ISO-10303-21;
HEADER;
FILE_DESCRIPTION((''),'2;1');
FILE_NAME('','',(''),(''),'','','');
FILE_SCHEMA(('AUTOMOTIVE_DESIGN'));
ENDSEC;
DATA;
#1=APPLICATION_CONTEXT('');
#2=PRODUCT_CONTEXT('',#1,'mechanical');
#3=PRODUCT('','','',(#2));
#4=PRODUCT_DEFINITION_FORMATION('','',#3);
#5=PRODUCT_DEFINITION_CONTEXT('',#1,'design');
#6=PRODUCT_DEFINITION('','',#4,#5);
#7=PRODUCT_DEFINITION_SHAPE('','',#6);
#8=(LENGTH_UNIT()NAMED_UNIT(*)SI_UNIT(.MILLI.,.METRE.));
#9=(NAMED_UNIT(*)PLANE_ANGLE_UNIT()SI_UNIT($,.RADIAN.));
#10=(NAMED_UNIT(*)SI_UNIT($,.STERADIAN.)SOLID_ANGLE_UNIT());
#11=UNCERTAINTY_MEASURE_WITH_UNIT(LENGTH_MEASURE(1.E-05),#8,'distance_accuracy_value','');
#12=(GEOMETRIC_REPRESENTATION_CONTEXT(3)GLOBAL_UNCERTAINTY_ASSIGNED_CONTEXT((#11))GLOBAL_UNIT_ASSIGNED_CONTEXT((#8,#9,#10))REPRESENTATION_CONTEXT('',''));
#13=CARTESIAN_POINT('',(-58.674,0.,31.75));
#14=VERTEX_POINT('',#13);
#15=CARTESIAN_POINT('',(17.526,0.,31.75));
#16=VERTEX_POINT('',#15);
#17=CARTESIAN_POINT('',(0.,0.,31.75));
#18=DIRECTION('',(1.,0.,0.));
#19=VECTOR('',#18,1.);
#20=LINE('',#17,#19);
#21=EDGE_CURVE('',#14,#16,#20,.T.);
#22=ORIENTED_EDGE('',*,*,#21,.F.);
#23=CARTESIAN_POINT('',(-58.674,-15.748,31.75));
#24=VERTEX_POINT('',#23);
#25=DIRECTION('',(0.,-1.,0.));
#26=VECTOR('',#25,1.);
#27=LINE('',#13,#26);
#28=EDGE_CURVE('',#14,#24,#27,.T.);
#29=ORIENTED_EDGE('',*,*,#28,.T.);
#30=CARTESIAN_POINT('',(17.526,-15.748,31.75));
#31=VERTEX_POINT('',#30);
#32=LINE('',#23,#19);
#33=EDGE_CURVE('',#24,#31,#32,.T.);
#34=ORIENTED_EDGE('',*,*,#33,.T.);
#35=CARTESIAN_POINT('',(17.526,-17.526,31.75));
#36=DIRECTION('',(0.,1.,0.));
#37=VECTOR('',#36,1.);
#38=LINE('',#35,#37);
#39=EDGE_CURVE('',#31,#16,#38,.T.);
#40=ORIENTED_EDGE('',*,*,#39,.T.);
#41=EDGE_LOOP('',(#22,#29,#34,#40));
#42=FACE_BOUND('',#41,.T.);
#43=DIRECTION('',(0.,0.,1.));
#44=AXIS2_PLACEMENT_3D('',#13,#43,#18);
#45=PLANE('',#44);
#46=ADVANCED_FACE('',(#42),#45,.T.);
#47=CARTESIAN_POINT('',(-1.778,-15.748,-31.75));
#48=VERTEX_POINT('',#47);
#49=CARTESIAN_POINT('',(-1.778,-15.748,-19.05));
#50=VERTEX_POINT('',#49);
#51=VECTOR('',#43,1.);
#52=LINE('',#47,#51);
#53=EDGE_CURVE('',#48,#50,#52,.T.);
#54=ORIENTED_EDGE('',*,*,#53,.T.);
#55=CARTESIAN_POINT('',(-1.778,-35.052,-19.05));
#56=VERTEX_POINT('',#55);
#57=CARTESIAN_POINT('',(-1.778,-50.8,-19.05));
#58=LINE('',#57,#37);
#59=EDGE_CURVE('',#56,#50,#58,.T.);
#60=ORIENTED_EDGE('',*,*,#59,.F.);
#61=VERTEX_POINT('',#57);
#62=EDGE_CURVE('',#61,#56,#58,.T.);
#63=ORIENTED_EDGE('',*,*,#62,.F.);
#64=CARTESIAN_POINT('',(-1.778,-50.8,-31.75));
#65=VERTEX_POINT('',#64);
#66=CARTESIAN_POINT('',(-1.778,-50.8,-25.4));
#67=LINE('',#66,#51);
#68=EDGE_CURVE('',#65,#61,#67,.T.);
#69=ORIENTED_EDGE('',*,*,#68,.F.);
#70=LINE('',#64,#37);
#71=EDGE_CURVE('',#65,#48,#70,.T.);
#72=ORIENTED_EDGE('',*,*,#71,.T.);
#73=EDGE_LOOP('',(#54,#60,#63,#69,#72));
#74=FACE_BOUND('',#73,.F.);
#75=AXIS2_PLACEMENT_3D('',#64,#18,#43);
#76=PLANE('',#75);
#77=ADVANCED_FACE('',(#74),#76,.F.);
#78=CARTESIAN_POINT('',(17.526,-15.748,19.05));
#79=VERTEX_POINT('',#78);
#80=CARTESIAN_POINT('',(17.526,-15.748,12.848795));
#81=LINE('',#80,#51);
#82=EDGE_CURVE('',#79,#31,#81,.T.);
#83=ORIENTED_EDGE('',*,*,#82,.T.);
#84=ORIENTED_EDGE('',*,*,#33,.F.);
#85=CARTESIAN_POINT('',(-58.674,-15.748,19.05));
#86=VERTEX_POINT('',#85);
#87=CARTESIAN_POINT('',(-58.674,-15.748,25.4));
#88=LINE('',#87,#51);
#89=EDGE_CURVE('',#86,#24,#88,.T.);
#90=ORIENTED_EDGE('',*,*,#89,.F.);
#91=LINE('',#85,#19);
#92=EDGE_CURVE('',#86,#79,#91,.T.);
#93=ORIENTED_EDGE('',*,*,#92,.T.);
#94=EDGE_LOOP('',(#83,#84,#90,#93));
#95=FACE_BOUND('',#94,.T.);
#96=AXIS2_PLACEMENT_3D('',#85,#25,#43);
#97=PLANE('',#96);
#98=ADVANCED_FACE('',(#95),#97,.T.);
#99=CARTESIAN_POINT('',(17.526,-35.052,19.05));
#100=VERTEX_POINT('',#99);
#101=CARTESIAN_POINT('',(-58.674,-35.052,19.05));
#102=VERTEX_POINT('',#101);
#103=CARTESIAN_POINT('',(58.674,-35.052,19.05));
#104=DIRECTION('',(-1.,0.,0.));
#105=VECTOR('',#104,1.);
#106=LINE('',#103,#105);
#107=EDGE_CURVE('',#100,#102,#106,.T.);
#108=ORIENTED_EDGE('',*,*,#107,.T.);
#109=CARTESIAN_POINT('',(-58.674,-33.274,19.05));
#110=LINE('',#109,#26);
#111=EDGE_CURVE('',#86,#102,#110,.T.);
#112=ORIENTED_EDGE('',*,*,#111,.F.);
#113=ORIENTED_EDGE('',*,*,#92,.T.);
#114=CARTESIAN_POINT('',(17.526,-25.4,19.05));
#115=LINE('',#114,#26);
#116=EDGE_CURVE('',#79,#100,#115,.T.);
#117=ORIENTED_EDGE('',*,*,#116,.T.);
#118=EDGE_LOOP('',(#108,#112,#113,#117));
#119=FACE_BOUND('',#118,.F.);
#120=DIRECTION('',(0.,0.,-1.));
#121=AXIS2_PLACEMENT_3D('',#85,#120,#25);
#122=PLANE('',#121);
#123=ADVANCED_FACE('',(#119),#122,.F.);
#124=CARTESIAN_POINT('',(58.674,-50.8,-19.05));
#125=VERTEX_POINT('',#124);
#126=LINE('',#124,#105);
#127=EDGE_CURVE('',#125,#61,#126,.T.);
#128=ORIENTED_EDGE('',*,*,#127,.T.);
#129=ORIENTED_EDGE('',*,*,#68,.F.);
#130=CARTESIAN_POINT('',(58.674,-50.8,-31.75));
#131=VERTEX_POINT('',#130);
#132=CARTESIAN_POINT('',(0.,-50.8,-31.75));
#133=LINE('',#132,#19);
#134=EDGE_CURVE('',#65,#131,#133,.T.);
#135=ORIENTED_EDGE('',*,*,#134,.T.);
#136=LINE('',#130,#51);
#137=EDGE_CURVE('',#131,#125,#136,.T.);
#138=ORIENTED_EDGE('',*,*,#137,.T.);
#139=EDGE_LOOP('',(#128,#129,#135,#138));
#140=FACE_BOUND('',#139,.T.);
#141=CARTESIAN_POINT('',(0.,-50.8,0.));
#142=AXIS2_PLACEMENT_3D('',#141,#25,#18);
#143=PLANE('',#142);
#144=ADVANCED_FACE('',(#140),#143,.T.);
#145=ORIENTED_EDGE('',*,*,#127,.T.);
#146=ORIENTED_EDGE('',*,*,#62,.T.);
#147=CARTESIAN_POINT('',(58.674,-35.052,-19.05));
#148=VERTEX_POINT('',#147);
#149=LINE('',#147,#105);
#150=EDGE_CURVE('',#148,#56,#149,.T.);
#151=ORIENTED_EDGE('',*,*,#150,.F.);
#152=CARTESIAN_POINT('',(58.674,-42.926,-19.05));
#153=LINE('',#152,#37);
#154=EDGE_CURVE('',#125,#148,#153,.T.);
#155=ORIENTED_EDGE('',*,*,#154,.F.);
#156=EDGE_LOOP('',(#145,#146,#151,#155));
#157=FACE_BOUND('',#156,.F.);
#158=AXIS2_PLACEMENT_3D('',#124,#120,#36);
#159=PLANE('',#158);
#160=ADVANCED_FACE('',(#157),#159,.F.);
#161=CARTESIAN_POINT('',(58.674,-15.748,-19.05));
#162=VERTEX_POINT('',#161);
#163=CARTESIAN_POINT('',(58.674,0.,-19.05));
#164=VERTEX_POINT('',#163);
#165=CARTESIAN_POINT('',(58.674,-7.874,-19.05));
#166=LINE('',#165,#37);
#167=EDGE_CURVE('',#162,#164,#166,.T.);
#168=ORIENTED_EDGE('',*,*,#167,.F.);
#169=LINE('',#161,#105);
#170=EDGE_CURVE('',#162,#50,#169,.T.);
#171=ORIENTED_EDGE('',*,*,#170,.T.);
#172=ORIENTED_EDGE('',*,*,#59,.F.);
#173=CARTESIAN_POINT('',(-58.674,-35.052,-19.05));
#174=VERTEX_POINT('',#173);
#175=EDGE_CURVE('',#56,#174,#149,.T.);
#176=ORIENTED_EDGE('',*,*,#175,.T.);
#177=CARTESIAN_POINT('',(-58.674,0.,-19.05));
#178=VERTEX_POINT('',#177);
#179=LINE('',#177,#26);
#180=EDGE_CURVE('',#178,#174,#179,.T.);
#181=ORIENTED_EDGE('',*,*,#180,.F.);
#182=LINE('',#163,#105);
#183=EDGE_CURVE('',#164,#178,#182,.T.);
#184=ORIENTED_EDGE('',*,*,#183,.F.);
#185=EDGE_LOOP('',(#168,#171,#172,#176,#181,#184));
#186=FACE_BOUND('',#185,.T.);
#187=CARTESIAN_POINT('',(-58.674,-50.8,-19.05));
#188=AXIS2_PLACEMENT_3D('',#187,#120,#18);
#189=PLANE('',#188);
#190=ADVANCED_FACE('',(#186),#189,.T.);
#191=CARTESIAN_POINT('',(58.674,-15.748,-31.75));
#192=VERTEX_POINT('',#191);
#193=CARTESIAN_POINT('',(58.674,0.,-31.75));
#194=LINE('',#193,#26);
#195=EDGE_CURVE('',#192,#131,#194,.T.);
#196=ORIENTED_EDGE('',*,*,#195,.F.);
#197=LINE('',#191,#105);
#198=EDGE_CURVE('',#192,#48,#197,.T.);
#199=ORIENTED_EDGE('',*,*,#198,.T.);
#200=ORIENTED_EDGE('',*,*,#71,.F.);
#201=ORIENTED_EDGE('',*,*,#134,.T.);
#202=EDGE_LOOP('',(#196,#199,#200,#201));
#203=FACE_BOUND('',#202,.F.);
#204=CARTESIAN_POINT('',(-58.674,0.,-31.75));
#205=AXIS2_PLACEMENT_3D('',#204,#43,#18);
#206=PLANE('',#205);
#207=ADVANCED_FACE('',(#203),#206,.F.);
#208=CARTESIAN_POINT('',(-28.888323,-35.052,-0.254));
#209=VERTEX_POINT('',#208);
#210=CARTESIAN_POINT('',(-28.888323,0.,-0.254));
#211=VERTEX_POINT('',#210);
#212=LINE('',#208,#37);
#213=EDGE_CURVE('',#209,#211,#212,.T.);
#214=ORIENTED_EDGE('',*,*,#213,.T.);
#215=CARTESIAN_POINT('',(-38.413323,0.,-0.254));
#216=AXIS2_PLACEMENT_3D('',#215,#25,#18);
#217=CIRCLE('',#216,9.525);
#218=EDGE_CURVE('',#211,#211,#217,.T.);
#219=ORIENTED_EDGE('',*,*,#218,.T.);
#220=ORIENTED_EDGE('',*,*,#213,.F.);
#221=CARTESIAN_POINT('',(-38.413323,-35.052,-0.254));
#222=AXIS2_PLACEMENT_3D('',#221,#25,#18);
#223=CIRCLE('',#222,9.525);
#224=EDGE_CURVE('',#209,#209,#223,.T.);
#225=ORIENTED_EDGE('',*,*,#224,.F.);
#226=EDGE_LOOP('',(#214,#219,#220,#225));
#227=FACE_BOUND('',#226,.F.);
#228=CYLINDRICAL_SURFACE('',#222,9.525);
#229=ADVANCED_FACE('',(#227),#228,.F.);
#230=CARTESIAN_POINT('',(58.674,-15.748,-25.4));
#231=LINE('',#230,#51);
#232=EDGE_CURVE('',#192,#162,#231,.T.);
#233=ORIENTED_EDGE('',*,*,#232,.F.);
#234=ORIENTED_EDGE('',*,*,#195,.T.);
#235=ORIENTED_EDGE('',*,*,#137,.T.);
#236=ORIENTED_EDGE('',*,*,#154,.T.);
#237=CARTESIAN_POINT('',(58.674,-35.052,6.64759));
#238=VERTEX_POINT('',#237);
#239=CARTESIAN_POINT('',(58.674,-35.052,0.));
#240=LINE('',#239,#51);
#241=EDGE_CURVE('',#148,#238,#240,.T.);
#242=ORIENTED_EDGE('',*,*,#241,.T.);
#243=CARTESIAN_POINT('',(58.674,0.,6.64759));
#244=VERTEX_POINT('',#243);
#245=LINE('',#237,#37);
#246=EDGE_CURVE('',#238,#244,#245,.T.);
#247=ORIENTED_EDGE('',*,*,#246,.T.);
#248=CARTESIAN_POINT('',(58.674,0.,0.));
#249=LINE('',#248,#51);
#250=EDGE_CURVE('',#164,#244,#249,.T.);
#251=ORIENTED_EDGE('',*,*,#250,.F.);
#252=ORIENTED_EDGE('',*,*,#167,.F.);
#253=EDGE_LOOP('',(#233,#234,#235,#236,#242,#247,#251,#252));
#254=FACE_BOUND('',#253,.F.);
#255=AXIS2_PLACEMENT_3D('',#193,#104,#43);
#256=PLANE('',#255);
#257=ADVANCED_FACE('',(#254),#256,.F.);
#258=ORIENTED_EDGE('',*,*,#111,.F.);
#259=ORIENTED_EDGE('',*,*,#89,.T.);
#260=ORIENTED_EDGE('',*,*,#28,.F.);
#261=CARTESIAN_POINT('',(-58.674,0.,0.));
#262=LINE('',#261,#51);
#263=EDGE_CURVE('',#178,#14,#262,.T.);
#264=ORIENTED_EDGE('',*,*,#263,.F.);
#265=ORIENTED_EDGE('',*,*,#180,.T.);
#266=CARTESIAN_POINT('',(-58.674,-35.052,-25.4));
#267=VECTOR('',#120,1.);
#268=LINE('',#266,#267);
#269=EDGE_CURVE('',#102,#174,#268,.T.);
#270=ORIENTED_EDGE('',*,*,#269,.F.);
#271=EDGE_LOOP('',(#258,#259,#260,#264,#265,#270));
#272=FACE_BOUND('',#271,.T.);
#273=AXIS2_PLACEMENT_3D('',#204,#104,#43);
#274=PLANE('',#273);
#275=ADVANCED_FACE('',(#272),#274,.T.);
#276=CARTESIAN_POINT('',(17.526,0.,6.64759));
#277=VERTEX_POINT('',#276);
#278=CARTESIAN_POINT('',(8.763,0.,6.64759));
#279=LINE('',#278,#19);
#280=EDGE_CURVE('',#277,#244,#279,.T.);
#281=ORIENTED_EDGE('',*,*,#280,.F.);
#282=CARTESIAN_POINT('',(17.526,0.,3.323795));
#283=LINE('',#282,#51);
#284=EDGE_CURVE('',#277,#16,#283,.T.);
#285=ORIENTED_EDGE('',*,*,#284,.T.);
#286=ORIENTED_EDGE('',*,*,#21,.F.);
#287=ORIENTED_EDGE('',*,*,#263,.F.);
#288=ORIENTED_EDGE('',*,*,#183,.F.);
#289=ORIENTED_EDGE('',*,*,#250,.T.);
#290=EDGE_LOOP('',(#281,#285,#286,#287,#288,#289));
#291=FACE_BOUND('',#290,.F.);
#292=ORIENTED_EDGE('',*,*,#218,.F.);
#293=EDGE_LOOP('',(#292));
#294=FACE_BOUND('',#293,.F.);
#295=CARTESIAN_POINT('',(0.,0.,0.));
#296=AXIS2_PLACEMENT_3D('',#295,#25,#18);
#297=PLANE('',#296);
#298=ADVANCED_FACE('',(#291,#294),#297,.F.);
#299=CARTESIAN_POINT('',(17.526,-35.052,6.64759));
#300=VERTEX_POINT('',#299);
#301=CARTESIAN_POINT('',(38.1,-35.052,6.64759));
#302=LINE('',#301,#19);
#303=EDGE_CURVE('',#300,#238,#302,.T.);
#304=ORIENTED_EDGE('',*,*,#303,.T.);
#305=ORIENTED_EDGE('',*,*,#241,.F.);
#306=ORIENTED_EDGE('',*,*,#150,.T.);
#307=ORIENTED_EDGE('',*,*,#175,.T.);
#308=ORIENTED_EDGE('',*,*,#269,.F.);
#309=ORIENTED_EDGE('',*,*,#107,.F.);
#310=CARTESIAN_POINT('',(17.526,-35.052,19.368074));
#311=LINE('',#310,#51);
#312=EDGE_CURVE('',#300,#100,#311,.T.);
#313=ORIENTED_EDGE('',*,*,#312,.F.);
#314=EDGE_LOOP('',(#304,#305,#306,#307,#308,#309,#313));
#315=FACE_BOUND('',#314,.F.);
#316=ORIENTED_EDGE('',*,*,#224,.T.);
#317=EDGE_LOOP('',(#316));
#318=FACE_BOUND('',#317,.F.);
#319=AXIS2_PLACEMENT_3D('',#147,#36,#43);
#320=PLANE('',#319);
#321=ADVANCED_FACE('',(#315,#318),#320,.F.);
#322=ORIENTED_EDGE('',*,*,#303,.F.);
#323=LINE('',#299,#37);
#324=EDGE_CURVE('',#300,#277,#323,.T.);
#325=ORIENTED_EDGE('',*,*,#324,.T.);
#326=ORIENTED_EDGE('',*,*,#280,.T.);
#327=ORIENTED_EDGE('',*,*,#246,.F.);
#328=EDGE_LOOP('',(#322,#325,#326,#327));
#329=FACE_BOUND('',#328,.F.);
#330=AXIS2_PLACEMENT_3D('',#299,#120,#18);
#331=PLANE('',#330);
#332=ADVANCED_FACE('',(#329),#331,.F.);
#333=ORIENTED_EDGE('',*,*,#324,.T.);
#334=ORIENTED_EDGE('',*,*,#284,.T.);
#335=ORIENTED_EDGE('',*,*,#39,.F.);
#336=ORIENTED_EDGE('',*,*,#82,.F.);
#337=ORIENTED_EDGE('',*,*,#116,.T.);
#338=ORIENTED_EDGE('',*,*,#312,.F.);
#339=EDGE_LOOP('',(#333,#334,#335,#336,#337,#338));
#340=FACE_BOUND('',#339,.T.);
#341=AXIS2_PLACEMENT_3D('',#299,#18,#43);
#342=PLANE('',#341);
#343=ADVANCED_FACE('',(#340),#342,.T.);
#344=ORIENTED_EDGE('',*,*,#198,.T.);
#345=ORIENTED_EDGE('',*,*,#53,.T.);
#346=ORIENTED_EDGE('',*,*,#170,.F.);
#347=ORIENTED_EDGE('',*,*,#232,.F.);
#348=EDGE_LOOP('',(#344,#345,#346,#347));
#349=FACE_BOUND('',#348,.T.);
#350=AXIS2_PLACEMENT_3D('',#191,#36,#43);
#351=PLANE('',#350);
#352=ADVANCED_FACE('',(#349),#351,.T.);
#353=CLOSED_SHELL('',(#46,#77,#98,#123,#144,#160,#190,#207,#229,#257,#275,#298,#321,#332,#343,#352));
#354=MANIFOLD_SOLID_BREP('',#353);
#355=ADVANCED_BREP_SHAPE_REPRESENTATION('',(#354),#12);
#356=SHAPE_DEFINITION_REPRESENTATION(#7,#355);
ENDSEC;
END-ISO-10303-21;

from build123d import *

# Parameters (mm, degrees)
F0_W      = 117.348
F0_H      = 63.5
F1_DEPTH  = 50.8
F2_W      = 35.052
F2_H      = 12.7
F3_DEPTH  = 117.349
F4_W      = 15.748
F4_H      = 38.1
F5_DEPTH  = 207
F6_DEPTH  = 117.349
F7_W      = 41.148
F7_H      = 25.4409682324
F8_DEPTH  = 35.053
F9_W      = 56.896
F9_H      = 12.7
F10_DEPTH = 50.801
F11_W     = 15.748
F11_H     = 12.7
F12_DEPTH = 117.349
F13_R     = 9.525
F14_DEPTH = 35.053


# Not quite as in the source:
# - an extrude ends at something that could not be found from the text; its depth is read off the source's solid


with BuildPart() as f1:
    # F0 (on Front) → F1 (new body)
    with BuildSketch(Plane.XZ):
        Rectangle(F0_W, F0_H)
    extrude(amount=F1_DEPTH)

    # F2 (on face) → F3 (cut, through all)
    with BuildSketch(Plane(origin=(-58.674, 0, 0), x_dir=(0, -1, 0), z_dir=(-1, 0, 0))):
        with Locations((33.274, 25.4)):
            Rectangle(F2_W, F2_H)
    extrude(amount=-F3_DEPTH, mode=Mode.SUBTRACT)

    # F4 (on face) → F5 (cut, through all)
    with BuildSketch(Plane.YZ.offset(58.674)):
        with Locations((-42.926, 0)):
            Rectangle(F4_W, F4_H)
    extrude(amount=F5_DEPTH, mode=Mode.SUBTRACT)

    # F4 (on face) → F6 (cut, through all)
    with BuildSketch(Plane.YZ.offset(58.674)):
        with Locations((-42.926, 0)):
            Rectangle(F4_W, F4_H)
    extrude(amount=-F6_DEPTH, mode=Mode.SUBTRACT)

    # F7 (on face) → F8 (cut, through all)
    with BuildSketch(Plane.XZ.offset(35.052)):
        with Locations((38.1, 19.3680736702)):
            Rectangle(F7_W, F7_H)
    extrude(amount=-F8_DEPTH, mode=Mode.SUBTRACT)

    # F9 (on face) → F10 (cut, through all)
    with BuildSketch(Plane.XZ.offset(50.8)):
        with Locations((-30.226, -25.4)):
            Rectangle(F9_W, F9_H)
    extrude(amount=-F10_DEPTH, mode=Mode.SUBTRACT)

    # F11 (on face) → F12 (cut, through all)
    with BuildSketch(Plane.YZ.offset(58.674)):
        with Locations((-7.874, -25.4)):
            Rectangle(F11_W, F11_H)
    extrude(amount=-F12_DEPTH, mode=Mode.SUBTRACT)

    # F13 (on face) → F14 (cut, through all)
    with BuildSketch(Plane.XZ.offset(35.052)):
        with Locations((-38.413323462, -0.254)):
            Circle(F13_R)
    extrude(amount=-F14_DEPTH, mode=Mode.SUBTRACT)


solid = f1.part
